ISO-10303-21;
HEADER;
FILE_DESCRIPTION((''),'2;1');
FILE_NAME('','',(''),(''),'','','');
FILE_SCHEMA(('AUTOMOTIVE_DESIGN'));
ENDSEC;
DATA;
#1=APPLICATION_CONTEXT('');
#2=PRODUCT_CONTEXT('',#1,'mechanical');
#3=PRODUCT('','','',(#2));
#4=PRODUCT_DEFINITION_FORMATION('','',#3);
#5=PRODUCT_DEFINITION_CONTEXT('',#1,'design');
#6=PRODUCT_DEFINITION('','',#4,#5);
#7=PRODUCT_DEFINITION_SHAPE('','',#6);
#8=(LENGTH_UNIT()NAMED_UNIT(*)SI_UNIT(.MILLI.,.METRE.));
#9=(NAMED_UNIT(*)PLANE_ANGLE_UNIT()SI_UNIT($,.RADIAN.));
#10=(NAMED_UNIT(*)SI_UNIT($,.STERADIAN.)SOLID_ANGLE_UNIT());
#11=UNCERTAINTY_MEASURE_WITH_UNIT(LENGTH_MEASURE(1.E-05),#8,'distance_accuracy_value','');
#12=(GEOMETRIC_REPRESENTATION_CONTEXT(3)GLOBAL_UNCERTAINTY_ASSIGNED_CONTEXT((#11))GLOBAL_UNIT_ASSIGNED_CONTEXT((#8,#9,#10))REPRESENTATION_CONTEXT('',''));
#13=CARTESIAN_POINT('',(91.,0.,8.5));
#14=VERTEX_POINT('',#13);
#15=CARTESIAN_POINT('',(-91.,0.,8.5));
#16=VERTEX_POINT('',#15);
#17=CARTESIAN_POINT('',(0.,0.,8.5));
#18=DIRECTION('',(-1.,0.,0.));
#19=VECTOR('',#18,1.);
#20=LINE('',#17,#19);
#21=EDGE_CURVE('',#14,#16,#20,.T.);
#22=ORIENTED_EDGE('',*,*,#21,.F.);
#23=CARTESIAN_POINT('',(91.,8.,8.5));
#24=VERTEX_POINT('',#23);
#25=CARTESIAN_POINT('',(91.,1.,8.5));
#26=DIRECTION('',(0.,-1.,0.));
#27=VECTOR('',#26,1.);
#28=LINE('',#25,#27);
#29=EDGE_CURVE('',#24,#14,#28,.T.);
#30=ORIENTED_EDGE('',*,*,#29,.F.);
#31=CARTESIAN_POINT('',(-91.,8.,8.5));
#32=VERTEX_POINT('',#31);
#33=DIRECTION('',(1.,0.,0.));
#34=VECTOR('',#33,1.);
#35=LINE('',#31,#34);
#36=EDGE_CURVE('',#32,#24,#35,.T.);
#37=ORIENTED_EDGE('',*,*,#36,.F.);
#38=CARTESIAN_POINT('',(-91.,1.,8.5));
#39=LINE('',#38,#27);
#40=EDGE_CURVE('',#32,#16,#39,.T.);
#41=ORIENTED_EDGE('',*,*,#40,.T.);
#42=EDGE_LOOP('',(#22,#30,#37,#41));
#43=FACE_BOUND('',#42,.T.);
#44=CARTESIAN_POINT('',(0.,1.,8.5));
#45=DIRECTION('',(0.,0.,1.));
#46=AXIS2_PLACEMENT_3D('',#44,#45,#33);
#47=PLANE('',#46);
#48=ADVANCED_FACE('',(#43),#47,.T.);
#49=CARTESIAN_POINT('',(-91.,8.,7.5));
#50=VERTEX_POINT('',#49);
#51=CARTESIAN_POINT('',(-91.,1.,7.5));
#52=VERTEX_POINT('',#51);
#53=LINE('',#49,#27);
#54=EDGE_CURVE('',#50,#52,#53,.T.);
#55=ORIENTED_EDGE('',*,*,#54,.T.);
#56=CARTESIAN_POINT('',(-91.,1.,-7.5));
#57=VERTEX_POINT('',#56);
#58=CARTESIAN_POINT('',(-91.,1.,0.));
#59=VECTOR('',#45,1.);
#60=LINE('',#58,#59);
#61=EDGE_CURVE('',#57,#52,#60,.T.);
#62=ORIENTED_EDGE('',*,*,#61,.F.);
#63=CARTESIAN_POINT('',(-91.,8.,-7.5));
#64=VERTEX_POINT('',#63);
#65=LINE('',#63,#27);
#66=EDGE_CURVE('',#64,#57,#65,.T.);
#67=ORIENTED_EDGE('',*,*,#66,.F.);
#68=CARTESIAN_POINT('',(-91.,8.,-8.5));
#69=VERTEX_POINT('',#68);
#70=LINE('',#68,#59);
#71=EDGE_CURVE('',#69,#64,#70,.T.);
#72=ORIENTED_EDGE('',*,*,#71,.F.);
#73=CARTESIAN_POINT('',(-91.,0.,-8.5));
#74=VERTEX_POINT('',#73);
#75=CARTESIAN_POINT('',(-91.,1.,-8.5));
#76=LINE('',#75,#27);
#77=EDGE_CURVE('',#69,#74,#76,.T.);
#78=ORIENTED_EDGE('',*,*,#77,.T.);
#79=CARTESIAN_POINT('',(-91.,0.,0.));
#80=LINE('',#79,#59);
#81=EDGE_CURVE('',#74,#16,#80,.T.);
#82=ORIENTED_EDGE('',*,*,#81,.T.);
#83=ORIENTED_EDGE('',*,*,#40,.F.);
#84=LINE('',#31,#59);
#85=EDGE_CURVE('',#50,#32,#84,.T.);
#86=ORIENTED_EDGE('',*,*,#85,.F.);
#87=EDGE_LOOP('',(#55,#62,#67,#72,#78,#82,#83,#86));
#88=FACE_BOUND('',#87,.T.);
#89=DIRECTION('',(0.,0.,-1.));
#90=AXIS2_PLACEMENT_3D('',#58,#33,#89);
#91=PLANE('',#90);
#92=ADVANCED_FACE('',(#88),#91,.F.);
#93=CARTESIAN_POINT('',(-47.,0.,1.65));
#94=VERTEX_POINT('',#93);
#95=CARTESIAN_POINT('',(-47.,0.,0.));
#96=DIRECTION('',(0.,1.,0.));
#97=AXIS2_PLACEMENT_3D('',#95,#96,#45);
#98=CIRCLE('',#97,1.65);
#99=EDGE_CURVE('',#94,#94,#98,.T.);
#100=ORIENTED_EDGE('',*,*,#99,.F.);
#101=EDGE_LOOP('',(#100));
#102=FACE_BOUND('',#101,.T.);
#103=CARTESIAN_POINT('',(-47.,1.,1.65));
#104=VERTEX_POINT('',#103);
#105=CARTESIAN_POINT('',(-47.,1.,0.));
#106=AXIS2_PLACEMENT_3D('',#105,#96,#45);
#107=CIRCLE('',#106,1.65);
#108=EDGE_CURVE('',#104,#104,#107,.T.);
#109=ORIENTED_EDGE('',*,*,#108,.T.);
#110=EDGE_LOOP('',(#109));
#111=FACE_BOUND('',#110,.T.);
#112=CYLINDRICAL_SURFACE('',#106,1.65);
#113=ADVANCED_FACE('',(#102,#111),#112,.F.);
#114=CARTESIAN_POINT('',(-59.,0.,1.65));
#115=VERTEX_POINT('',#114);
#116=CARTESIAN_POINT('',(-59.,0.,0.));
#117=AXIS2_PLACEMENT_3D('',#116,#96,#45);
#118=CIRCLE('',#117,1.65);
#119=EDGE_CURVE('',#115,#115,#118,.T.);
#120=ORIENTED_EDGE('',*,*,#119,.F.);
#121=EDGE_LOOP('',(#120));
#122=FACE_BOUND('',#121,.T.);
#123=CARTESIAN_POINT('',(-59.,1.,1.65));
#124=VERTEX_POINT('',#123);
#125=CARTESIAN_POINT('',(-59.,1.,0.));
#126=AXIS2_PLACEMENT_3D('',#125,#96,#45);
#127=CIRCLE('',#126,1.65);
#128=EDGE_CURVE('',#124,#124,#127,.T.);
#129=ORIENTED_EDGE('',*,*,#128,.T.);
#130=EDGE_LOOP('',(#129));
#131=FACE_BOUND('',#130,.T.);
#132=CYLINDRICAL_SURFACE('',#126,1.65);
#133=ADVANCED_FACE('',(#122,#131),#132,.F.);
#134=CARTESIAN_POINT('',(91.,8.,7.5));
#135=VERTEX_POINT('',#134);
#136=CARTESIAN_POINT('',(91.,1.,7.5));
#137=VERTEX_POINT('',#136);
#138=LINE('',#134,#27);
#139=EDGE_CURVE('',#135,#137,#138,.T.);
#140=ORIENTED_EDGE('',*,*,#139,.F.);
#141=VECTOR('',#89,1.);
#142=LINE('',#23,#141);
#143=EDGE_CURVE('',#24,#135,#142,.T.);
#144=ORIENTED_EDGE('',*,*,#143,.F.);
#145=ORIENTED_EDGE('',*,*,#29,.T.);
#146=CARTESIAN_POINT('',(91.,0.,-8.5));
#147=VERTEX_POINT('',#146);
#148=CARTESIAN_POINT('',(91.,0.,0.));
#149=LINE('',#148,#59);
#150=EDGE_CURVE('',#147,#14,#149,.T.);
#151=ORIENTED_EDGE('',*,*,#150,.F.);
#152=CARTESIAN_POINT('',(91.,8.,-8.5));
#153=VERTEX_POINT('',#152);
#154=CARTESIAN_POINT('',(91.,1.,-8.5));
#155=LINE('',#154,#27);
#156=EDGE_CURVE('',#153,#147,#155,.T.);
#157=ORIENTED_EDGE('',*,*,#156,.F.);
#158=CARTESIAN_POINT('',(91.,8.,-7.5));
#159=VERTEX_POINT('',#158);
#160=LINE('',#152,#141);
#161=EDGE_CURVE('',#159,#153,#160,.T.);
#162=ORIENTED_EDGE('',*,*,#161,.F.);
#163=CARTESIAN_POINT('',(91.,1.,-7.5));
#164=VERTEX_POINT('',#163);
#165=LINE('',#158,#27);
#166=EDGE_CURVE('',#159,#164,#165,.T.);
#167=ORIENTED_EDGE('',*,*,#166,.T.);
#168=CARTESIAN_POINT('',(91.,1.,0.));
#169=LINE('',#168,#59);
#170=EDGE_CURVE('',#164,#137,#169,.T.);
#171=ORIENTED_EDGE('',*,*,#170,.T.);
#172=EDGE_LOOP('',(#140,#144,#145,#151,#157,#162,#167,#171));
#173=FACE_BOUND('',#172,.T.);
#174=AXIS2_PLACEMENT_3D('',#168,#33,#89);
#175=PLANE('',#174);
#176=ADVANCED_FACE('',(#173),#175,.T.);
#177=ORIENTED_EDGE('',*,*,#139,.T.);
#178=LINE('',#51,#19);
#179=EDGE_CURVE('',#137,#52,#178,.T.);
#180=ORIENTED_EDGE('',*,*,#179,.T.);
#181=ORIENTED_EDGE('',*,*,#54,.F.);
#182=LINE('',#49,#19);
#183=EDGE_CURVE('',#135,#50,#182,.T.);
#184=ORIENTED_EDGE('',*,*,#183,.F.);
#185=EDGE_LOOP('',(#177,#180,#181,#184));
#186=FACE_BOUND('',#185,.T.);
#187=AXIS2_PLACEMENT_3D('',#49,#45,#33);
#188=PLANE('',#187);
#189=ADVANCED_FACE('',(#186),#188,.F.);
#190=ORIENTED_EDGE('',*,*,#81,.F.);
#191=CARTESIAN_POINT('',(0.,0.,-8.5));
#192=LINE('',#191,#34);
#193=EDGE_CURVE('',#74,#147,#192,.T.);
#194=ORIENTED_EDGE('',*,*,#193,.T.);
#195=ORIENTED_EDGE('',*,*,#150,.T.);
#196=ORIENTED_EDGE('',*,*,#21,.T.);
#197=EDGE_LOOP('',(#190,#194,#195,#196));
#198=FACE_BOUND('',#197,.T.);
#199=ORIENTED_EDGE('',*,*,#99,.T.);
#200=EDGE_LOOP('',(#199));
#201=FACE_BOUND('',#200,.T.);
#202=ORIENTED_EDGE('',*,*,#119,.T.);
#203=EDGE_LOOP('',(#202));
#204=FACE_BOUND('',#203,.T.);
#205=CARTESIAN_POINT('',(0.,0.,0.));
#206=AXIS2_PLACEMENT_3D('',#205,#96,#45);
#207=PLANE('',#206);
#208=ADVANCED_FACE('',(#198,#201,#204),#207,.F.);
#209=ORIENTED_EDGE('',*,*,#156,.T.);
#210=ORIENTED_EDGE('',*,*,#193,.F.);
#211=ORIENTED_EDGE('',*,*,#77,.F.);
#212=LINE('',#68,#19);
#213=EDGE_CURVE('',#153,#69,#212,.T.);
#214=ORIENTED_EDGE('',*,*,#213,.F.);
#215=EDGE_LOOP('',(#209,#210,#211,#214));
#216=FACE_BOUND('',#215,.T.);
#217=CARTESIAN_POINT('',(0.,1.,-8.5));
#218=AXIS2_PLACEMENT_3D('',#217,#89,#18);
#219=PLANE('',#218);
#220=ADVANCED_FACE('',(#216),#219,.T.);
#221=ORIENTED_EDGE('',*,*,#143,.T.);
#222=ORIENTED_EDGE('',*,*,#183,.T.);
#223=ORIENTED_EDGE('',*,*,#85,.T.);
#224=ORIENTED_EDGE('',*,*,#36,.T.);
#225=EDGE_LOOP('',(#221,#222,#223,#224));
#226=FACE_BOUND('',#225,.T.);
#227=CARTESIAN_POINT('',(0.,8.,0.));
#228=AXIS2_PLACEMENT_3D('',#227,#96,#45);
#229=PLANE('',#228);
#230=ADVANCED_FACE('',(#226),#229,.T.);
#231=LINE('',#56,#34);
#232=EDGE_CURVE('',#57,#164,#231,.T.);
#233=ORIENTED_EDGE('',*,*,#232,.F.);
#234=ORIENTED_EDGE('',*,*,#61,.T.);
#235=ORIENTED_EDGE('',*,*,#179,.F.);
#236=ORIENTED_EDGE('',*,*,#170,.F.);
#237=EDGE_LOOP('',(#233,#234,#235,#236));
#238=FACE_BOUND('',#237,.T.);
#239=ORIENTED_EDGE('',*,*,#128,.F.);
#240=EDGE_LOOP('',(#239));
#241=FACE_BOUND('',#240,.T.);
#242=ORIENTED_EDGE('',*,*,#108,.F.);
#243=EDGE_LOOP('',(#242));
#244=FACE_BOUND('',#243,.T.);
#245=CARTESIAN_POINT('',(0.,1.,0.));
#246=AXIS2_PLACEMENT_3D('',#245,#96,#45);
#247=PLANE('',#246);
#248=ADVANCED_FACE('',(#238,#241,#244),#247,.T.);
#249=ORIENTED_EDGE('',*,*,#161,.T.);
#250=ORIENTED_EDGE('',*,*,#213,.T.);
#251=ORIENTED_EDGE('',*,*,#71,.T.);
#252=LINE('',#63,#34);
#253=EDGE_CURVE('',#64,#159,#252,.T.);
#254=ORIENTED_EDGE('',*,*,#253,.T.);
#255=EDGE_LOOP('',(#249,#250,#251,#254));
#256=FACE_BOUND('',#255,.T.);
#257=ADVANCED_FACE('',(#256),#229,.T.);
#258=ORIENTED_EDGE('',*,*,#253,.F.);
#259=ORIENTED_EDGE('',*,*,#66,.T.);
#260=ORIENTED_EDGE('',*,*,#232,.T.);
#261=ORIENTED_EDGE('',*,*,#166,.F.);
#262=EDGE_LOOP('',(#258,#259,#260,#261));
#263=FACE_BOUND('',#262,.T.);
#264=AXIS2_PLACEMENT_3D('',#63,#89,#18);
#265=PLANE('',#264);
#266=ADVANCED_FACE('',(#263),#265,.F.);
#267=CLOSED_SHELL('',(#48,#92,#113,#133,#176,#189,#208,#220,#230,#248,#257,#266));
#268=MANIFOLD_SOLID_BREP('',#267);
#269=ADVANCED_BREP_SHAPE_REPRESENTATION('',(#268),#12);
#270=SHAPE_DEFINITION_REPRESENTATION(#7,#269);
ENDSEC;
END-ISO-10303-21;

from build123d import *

# Parameters (mm, degrees)
SKETCH1_W               = 182
SKETCH1_H               = 17
BOSS_EXTRUDE1_DEPTH     = 1
SKETCH8_W               = 182
SKETCH8_H               = 1
BOSS_EXTRUDE2_DEPTH     = 7
ADVANCEDHOLE1_OUTLINE_R = 1.65
ADVANCEDHOLE1_DEPTH     = 1
SKETCH12_W              = 182
SKETCH12_H              = 13
SKETCH12_R              = 2
BOSS_EXTRUDE3_DEPTH     = 1
SKETCH13_W              = 182
SKETCH13_H              = 1
BOSS_EXTRUDE4_DEPTH     = 3


# Read off the part's stored shape, not the designer's step: AdvancedHole1
with BuildPart() as part:
    # Sketch1 → Boss-Extrude1 (new body)
    with BuildSketch(Plane(origin=(0, 0, 0), x_dir=(1, 0, 0), z_dir=(0, 1, 0))):
        Rectangle(SKETCH1_W, SKETCH1_H)
    extrude(amount=BOSS_EXTRUDE1_DEPTH)

    # Sketch8 → Boss-Extrude2 (add)
    with BuildSketch(Plane(origin=(0, 1, 0), x_dir=(1, 0, 0), z_dir=(0, 1, 0))):
        with Locations((0, 8)):
            Rectangle(SKETCH8_W, SKETCH8_H)
        with Locations((0, -8)):
            Rectangle(SKETCH8_W, SKETCH8_H)
    extrude(amount=BOSS_EXTRUDE2_DEPTH)

    # AdvancedHole1 outline → AdvancedHole1 (cut)
    with BuildSketch(Plane(origin=(0, 0, 0), x_dir=(1, 0, 0), z_dir=(0, 1, 0))):
        with Locations((-47, 0)):
            Circle(ADVANCEDHOLE1_OUTLINE_R)
        with Locations((-59, 0)):
            Circle(ADVANCEDHOLE1_OUTLINE_R)
    extrude(amount=ADVANCEDHOLE1_DEPTH, mode=Mode.SUBTRACT)


with BuildPart() as body_2:
    # Sketch12 → Boss-Extrude3 (new body)
    with BuildSketch(Plane(origin=(0, 0, 0), x_dir=(1, 0, 0), z_dir=(0, 1, 0))):
        with Locations((0, 44.153691451)):
            Rectangle(SKETCH12_W, SKETCH12_H)
        with Locations(Location((-72, 44.153691451, 0), (0, 0, 270))):
            Circle(SKETCH12_R, mode=Mode.SUBTRACT)
        with Locations(Location((-64, 44.153691451, 0), (0, 0, 270))):
            Circle(SKETCH12_R, mode=Mode.SUBTRACT)
        with Locations(Location((-56, 44.153691451, 0), (0, 0, 270))):
            Circle(SKETCH12_R, mode=Mode.SUBTRACT)
        with Locations(Location((-40, 44.153691451, 0), (0, 0, 270))):
            Circle(SKETCH12_R, mode=Mode.SUBTRACT)
        with Locations(Location((-32, 44.153691451, 0), (0, 0, 270))):
            Circle(SKETCH12_R, mode=Mode.SUBTRACT)
        with Locations(Location((-24, 44.153691451, 0), (0, 0, 270))):
            Circle(SKETCH12_R, mode=Mode.SUBTRACT)
        with Locations(Location((40, 44.153691451, 0), (0, 0, 90))):
            Circle(SKETCH12_R, mode=Mode.SUBTRACT)
        with Locations(Location((32, 44.153691451, 0), (0, 0, 90))):
            Circle(SKETCH12_R, mode=Mode.SUBTRACT)
        with Locations(Location((24, 44.153691451, 0), (0, 0, 90))):
            Circle(SKETCH12_R, mode=Mode.SUBTRACT)
        with Locations(Location((8, 44.153691451, 0), (0, 0, 90))):
            Circle(SKETCH12_R, mode=Mode.SUBTRACT)
        with Locations(Location((0, 44.153691451, 0), (0, 0, 90))):
            Circle(SKETCH12_R, mode=Mode.SUBTRACT)
        with Locations(Location((-8, 44.153691451, 0), (0, 0, 90))):
            Circle(SKETCH12_R, mode=Mode.SUBTRACT)
        with Locations(Location((72, 44.153691451, 0), (0, 0, 270))):
            Circle(SKETCH12_R, mode=Mode.SUBTRACT)
        with Locations(Location((64, 44.153691451, 0), (0, 0, 270))):
            Circle(SKETCH12_R, mode=Mode.SUBTRACT)
        with Locations(Location((56, 44.153691451, 0), (0, 0, 270))):
            Circle(SKETCH12_R, mode=Mode.SUBTRACT)
    extrude(amount=BOSS_EXTRUDE3_DEPTH)

    # Sketch13 → Boss-Extrude4 (add)
    with BuildSketch(Plane(origin=(0, 1, 0), x_dir=(1, 0, 0), z_dir=(0, 1, 0))):
        with Locations((0, 50.153691451)):
            Rectangle(SKETCH13_W, SKETCH13_H)
        with Locations((0, 38.153691451)):
            Rectangle(SKETCH13_W, SKETCH13_H)
    extrude(amount=BOSS_EXTRUDE4_DEPTH)


solid = part.part
